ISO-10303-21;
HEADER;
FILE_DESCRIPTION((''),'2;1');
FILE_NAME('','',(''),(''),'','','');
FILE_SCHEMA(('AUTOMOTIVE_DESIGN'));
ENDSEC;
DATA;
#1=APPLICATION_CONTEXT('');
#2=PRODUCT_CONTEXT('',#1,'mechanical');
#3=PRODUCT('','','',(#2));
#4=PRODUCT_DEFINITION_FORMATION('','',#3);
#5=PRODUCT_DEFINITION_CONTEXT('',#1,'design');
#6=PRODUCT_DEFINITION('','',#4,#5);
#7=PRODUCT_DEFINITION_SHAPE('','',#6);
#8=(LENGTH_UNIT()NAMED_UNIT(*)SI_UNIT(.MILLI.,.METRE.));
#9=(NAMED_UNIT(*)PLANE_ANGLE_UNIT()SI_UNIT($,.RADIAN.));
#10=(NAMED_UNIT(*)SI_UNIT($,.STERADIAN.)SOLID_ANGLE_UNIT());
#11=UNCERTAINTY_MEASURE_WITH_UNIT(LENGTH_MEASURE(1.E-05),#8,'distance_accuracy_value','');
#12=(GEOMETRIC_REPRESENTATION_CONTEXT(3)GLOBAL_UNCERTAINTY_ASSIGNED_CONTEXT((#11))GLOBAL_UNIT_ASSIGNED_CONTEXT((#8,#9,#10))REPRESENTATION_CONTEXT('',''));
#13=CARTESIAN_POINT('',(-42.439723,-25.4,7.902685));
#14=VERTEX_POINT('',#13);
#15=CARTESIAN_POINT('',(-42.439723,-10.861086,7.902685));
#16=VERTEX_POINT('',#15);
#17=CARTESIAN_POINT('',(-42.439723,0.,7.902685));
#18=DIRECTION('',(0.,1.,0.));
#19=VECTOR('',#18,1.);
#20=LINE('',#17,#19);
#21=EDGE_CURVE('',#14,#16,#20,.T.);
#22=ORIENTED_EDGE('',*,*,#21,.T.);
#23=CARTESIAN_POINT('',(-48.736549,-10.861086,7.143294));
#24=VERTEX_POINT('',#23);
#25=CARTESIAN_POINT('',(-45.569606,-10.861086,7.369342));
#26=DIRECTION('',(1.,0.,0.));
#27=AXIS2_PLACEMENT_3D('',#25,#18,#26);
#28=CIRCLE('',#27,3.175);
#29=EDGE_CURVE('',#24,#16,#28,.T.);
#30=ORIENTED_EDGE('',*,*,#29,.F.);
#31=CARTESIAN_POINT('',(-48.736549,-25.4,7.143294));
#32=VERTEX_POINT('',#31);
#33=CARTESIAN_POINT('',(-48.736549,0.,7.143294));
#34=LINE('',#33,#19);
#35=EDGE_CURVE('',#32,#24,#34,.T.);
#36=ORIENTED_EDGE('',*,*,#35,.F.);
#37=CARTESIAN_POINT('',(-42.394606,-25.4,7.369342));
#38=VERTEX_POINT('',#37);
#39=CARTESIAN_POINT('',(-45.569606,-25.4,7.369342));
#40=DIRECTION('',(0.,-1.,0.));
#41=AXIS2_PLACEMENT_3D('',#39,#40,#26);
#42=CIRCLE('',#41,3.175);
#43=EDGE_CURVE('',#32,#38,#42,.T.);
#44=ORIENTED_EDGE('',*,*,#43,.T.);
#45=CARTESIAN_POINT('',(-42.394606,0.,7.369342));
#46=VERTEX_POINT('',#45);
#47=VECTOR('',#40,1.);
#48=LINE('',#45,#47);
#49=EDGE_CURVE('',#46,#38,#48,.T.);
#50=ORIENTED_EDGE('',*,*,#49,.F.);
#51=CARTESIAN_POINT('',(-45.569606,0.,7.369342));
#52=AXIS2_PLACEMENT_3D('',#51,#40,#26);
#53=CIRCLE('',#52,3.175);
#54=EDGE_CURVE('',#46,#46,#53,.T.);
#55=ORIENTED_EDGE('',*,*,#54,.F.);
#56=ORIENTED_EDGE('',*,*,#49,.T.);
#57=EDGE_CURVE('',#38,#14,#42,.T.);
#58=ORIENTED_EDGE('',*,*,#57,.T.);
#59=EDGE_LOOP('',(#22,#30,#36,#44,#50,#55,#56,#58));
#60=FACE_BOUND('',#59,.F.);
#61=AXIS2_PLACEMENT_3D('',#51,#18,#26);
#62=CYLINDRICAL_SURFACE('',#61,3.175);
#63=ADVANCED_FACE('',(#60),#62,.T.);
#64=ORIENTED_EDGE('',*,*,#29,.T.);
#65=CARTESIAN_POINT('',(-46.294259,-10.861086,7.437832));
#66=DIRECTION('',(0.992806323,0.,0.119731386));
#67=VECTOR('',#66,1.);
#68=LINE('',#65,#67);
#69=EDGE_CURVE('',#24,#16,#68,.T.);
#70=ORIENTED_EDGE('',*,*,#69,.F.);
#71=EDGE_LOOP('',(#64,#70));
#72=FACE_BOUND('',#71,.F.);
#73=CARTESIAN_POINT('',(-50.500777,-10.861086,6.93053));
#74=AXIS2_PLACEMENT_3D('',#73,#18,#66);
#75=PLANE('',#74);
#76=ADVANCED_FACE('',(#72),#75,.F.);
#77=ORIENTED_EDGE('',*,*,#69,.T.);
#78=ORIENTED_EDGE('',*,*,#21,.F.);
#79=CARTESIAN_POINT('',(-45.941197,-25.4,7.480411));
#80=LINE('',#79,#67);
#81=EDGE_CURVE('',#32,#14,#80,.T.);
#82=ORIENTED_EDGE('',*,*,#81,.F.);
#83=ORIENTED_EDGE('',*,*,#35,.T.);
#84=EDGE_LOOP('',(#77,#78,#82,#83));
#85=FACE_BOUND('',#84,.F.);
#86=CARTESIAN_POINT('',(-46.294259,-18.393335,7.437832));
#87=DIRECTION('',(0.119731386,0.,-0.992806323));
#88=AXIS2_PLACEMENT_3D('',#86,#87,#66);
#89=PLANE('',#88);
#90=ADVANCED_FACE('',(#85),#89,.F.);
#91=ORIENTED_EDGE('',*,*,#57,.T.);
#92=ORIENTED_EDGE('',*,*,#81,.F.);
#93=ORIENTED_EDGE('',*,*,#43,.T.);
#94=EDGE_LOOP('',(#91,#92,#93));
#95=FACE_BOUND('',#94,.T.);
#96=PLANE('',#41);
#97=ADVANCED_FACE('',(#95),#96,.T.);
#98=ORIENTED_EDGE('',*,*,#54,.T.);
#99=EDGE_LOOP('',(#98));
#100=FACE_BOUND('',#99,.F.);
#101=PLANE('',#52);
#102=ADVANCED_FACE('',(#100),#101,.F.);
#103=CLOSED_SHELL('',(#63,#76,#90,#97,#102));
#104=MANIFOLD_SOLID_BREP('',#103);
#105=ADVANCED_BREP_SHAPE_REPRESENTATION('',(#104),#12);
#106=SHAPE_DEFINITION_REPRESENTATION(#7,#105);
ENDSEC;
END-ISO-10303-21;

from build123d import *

# Parameters (mm, degrees)
F0_R     = 3.175
F1_DEPTH = 25.4
F4_W     = 8.473996073
F4_H     = 15.0644984096
F5_DEPTH = 25.4


with BuildPart() as f1:
    # F0 (on Front) → F1 (new body)
    with BuildSketch(Plane.XZ):
        with Locations((-45.5696061254, 7.3693422601)):
            Circle(F0_R)
    extrude(amount=F1_DEPTH)

    # F4 (on line) → F5 (cut)
    with BuildSketch(Plane(origin=(-1.5477918404, 0, 12.8342080993), x_dir=(0.9928063231, 0, 0.1197313862), z_dir=(0.1197313862, 0, -0.9928063231))):
        with Locations((-45.0706910342, 18.3933349326)):
            Rectangle(F4_W, F4_H)
    extrude(amount=-F5_DEPTH, mode=Mode.SUBTRACT)


solid = f1.part
